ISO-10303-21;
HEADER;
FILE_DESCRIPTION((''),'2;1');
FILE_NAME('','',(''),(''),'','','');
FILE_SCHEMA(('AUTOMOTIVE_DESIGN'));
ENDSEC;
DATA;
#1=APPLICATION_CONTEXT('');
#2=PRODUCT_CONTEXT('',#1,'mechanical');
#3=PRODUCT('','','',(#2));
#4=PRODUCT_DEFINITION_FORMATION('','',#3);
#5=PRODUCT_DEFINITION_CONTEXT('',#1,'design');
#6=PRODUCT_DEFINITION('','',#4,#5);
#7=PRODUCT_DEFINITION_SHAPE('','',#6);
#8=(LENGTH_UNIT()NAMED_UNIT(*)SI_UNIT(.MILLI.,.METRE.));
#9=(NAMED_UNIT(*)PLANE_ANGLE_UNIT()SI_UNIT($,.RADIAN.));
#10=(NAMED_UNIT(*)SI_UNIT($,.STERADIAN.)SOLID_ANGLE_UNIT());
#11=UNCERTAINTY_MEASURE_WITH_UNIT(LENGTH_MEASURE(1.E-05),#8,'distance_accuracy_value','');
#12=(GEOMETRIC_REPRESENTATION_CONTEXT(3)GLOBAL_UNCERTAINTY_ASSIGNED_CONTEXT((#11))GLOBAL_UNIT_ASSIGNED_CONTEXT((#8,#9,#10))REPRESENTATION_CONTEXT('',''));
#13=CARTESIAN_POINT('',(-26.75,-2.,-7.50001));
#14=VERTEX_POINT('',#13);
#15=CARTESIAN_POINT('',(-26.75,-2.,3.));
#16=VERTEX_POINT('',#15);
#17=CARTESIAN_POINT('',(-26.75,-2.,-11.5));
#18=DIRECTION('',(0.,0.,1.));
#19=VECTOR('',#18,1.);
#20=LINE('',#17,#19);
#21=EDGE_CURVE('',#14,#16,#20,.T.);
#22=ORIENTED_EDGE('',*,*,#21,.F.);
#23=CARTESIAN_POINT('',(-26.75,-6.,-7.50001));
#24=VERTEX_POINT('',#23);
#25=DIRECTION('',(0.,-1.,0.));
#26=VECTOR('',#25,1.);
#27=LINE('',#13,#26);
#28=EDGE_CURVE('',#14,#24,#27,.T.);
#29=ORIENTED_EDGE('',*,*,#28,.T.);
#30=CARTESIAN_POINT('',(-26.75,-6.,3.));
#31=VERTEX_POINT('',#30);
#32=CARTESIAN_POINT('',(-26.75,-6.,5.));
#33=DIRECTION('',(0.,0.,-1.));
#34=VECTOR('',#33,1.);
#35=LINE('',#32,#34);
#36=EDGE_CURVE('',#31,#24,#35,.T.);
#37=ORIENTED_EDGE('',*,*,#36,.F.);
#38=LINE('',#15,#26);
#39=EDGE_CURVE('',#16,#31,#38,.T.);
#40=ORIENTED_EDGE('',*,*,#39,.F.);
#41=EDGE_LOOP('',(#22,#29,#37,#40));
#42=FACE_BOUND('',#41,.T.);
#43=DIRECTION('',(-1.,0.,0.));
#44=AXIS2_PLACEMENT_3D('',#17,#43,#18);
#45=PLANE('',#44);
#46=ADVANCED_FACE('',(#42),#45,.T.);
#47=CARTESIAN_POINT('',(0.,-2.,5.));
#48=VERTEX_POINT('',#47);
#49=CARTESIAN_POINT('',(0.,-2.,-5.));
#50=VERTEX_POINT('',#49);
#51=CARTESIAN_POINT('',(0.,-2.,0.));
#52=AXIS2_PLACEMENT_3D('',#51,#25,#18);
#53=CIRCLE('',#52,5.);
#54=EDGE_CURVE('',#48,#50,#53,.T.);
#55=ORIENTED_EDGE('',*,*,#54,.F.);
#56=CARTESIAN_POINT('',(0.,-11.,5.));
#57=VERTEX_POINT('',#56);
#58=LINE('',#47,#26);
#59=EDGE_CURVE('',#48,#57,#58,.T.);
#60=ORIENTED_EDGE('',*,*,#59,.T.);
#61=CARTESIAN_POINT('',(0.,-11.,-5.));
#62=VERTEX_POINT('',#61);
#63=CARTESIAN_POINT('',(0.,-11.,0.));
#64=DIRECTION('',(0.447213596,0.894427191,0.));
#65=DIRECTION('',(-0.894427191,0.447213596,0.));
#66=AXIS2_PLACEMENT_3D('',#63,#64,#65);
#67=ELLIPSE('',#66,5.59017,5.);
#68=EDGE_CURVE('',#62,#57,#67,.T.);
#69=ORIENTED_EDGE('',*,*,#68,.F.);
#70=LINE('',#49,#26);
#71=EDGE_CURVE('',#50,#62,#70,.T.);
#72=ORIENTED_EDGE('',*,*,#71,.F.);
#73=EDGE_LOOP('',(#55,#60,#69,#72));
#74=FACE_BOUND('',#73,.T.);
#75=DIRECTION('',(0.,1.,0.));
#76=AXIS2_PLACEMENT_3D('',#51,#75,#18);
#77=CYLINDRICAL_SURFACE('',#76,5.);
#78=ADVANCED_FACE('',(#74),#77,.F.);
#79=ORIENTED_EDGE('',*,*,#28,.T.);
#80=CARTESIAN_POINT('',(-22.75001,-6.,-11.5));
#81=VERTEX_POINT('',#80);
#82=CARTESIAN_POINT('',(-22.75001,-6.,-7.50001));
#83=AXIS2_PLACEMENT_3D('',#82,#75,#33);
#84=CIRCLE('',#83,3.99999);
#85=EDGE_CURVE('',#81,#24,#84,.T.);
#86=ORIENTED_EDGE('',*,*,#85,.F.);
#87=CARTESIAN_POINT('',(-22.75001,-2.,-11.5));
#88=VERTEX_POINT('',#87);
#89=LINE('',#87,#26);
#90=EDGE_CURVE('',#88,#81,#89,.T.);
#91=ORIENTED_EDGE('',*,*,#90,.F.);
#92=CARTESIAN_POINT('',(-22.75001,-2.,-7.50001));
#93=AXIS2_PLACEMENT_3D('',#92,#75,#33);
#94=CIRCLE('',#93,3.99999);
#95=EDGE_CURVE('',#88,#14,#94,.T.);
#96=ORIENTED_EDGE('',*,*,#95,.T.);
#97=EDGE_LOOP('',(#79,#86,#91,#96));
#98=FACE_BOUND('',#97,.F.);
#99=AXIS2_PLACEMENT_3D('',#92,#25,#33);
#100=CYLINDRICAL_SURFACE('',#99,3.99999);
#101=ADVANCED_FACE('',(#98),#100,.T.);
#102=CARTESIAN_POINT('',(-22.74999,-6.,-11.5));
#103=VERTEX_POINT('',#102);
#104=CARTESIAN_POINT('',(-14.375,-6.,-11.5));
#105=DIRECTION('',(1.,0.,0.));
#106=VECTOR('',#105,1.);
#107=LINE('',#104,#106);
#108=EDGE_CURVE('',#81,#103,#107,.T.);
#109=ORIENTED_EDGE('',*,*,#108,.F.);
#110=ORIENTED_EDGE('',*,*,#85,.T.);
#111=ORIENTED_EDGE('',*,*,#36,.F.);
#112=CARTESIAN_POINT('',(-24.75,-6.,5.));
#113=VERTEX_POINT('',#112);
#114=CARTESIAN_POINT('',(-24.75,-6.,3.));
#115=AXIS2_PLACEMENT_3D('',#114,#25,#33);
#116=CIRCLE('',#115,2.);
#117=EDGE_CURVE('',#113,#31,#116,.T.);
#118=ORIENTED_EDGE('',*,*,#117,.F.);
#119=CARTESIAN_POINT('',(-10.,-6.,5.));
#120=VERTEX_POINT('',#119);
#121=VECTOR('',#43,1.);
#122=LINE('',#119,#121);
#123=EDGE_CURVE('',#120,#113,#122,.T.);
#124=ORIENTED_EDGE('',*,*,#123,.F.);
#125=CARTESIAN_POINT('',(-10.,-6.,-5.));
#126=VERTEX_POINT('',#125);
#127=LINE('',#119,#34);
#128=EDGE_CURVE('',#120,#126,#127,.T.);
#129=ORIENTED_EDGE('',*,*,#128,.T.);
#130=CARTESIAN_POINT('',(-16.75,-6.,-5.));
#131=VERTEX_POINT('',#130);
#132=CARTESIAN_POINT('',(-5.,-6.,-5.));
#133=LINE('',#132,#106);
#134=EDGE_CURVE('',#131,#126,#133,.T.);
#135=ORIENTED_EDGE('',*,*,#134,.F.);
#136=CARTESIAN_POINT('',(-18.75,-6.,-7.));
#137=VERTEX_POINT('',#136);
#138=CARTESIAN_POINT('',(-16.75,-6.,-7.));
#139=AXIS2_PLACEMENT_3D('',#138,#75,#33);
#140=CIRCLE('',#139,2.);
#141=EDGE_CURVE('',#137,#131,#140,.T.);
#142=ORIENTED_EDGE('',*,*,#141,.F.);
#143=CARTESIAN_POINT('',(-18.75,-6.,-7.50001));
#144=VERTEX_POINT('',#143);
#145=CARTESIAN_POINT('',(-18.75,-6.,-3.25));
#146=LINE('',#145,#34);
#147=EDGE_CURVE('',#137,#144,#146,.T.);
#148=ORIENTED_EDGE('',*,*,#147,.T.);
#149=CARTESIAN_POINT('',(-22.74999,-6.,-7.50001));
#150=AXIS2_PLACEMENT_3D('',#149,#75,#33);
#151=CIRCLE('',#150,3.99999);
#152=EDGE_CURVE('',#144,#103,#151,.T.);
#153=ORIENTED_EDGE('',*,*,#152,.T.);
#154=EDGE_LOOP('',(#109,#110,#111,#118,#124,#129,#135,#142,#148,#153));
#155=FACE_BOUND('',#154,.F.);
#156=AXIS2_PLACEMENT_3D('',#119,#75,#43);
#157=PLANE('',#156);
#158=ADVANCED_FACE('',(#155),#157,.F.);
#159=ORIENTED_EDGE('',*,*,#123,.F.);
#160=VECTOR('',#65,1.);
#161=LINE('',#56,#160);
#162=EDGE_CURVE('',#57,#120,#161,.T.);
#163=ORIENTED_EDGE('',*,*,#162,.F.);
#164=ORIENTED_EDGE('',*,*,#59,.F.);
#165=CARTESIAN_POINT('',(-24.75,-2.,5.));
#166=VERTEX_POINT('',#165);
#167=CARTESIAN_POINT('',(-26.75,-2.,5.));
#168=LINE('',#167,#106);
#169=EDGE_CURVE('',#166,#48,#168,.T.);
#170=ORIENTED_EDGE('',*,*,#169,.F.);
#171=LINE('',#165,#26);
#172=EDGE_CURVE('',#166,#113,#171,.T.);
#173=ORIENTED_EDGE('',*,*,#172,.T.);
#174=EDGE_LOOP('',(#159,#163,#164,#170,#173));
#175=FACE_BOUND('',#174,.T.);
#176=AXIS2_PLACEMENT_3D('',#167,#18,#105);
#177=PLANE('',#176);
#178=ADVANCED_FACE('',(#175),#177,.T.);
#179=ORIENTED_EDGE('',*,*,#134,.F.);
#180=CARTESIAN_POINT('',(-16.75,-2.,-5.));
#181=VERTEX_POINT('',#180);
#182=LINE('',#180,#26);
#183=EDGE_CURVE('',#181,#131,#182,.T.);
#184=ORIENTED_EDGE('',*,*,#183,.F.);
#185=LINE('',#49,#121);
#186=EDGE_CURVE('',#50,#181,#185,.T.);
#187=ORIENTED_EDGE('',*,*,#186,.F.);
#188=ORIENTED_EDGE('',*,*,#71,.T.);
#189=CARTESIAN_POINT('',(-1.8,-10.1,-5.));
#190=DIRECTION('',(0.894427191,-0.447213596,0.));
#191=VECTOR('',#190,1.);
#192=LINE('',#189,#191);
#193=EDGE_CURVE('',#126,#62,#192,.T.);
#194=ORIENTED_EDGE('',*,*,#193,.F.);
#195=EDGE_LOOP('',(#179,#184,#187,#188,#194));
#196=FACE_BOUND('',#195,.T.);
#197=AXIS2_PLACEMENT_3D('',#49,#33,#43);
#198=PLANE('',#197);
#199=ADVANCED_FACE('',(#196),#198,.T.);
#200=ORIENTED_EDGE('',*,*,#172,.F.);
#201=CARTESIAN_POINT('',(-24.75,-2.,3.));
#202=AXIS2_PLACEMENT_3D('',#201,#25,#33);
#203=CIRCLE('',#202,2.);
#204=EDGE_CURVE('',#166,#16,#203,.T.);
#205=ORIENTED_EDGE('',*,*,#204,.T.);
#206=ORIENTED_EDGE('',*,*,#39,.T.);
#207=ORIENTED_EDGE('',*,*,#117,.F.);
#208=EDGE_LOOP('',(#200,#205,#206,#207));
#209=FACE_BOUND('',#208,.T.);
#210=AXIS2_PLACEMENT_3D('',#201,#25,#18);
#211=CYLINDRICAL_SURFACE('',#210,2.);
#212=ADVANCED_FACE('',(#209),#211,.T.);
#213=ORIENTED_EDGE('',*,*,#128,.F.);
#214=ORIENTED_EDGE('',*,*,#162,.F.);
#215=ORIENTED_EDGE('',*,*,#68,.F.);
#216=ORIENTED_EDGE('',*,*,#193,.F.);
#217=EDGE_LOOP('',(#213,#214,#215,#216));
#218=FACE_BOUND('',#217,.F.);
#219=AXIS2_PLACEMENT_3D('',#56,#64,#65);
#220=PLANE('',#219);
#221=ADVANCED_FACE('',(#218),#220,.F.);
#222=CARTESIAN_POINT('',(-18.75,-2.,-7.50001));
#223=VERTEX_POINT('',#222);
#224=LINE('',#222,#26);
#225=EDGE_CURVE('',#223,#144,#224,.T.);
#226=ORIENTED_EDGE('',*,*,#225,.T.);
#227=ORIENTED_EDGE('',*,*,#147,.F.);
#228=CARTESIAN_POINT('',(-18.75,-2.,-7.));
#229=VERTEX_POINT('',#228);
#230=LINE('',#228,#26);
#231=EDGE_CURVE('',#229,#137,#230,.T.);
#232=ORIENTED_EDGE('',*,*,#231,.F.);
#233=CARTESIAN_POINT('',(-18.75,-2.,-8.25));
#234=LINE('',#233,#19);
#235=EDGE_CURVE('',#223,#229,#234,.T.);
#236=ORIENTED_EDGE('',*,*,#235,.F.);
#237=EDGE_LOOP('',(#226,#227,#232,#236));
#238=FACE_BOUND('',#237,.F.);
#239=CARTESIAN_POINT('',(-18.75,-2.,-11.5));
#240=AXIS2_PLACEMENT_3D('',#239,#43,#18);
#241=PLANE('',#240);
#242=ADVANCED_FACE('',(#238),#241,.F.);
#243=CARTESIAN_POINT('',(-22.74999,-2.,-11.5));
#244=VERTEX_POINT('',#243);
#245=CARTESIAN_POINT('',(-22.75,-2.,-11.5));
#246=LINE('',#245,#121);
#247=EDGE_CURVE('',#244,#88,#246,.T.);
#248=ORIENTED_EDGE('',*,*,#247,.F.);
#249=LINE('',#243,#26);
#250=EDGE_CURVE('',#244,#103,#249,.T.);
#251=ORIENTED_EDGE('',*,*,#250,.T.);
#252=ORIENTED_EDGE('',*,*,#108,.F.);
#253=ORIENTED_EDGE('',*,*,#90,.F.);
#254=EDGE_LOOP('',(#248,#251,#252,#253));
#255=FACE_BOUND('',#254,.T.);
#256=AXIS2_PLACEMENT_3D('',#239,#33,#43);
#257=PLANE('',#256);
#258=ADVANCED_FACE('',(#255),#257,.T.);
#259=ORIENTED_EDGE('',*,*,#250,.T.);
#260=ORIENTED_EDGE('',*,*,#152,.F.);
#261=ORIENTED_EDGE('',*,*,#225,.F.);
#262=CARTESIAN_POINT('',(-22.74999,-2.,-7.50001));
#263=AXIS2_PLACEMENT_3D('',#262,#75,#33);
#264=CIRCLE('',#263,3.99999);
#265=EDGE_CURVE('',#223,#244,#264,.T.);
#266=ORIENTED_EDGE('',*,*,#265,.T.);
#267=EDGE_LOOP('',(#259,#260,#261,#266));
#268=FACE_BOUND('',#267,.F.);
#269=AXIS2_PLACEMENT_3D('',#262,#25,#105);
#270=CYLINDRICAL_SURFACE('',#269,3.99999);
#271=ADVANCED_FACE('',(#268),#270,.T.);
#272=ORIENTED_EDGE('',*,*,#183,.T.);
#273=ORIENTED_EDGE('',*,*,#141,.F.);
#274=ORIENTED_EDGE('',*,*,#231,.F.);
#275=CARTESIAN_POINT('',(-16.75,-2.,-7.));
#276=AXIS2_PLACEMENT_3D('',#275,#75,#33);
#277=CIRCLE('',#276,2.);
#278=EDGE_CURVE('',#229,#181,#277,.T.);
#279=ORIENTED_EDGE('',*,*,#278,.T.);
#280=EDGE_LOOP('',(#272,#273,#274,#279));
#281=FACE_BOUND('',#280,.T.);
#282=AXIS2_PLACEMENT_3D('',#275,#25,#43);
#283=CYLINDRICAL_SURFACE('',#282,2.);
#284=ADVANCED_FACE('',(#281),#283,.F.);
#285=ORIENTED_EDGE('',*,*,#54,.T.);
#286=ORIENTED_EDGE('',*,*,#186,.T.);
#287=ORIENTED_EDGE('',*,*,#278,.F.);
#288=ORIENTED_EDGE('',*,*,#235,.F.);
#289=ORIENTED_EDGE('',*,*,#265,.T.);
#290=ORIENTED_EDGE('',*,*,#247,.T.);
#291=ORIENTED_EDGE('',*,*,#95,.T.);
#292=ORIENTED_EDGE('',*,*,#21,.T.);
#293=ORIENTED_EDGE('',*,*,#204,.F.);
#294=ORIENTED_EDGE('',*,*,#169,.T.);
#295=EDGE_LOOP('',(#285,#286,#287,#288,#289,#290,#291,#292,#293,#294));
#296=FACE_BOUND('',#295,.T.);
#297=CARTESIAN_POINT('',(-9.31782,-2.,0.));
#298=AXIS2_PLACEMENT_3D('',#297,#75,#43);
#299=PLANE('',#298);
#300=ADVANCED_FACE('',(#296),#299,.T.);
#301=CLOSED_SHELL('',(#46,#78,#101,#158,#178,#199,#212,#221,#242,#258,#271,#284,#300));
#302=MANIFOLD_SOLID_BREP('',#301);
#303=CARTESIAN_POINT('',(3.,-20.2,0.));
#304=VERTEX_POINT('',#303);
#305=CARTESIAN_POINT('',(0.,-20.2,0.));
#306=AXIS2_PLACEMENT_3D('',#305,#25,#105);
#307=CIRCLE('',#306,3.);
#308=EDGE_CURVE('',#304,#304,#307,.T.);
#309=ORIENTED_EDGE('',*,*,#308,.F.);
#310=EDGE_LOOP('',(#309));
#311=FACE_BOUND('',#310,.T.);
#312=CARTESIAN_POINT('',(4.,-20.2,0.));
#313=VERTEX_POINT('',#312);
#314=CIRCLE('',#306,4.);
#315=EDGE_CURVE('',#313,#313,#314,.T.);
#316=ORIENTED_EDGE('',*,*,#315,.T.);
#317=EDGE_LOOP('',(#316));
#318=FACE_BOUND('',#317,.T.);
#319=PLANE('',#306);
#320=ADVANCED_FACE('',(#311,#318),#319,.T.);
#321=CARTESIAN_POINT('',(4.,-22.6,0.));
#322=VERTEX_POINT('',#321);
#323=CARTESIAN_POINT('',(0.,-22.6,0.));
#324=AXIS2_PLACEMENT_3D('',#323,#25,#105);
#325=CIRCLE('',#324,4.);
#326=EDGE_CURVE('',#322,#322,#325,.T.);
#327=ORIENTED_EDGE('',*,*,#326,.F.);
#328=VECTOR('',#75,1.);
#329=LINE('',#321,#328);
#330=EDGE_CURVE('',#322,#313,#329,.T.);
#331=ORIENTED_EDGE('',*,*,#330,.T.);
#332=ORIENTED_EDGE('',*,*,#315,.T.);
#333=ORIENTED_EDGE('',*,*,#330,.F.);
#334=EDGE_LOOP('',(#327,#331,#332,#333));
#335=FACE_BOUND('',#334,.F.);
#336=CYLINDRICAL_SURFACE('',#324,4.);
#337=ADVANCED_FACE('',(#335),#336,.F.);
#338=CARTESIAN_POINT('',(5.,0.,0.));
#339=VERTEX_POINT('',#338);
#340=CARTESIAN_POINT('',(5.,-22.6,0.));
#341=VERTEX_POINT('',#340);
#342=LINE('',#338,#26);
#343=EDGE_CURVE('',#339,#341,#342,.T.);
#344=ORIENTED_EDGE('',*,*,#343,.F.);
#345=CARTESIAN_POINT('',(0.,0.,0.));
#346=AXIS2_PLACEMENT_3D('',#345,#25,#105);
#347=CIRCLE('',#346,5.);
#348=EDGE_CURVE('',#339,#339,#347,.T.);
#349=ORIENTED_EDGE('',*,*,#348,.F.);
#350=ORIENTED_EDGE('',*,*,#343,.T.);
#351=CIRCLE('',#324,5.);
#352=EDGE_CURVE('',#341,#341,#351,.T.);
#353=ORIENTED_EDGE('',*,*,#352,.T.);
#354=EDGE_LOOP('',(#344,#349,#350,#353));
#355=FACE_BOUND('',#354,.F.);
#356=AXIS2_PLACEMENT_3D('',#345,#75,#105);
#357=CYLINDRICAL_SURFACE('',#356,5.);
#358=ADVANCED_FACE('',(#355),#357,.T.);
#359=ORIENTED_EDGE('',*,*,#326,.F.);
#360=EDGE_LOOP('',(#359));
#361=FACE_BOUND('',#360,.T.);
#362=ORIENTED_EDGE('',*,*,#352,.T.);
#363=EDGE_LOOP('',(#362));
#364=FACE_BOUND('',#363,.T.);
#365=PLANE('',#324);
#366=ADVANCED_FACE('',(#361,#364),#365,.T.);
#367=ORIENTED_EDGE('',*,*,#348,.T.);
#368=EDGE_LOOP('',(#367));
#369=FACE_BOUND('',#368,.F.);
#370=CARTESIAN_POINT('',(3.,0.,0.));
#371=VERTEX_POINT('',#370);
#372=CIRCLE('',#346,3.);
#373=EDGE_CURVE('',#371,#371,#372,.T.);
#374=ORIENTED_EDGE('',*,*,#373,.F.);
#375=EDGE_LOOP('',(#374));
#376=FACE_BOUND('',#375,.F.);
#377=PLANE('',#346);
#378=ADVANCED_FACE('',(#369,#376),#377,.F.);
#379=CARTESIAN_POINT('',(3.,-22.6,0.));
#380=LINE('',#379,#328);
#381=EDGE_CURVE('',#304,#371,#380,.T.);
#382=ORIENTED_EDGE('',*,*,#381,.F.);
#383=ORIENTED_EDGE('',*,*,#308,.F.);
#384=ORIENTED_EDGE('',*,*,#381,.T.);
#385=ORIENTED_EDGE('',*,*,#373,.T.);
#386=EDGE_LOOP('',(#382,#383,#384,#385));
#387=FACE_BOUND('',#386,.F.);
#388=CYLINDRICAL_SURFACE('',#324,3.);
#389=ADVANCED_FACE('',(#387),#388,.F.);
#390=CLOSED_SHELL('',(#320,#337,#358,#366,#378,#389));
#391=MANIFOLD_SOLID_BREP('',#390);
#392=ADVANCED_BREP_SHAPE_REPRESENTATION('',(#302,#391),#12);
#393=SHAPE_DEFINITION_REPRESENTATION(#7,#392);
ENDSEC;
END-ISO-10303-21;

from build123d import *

# Parameters (mm, degrees)
F0_R      = 5
F1_DEPTH  = 22.6
F2_R      = 3
F3_DEPTH  = 25
F4_R      = 4
F4_R_2    = 3
F5_DEPTH  = 2.4
F7_W      = 8
F7_H      = 10
F7_H_2    = 6.5
F8_DEPTH  = 9
F10_DEPTH = 25
F11_R     = 2
F12_R     = 2
F13_R     = 3.99999


# Not quite as in the source:
# - a fillet or chamfer is up to 0.001 mm smaller than in the source, because OpenCascade refuses the exact size


with BuildPart() as f1:
    # F0 (on Front) → F1 (new body)
    with BuildSketch(Plane.XZ):
        Circle(F0_R)
    extrude(amount=F1_DEPTH)

    # F2 (on face) → F3 (cut)
    with BuildSketch(Plane.XZ.offset(22.6)):
        Circle(F2_R)
    extrude(amount=-F3_DEPTH, mode=Mode.SUBTRACT)

    # F4 (on face) → F5 (cut)
    with BuildSketch(Plane.XZ.offset(22.6)):
        Circle(F4_R)
        Circle(F4_R_2, mode=Mode.SUBTRACT)
    extrude(amount=-F5_DEPTH, mode=Mode.SUBTRACT)


with BuildPart() as f8:
    # F7 (on offset) → F8 (new body)
    with BuildSketch(Plane(origin=(0, -2, 0), x_dir=(-1, 0, 0), z_dir=(0, 1, 0))):
        with BuildLine():
            ThreePointArc((0, 5), (5, 0), (0, -5))
            Line((0, -5), (18.75, -5))
            Line((18.75, -5), (18.75, 5))
            Line((18.75, 5), (0, 5))
        make_face()
        with Locations((22.75, 0)):
            Rectangle(F7_W, F7_H)
        with Locations((22.75, -8.25)):
            Rectangle(F7_W, F7_H_2)
    extrude(amount=-F8_DEPTH)

    # F9 (on face) → F10 (cut)
    with BuildSketch(Plane.XY.offset(5)):
        Polygon((-26.75, -11), (-5, -11), (-10, -6), (-26.75, -6), align=None)
        Polygon((-10, -6), (-5, -11), (0, -11), align=None)
    extrude(amount=-F10_DEPTH, mode=Mode.SUBTRACT)

    # F11
    f11_edges = [f8.edges().sort_by_distance(p)[0] for p in [
        (-26.75, -4, 5),
    ]]
    fillet(f11_edges, radius=F11_R)

    # F12
    f12_edges = [f8.edges().sort_by_distance(p)[0] for p in [
        (-18.75, -4, -5),
    ]]
    fillet(f12_edges, radius=F12_R)

    # F13 (radius 4 in the source; OpenCascade refuses exactly that, so slightly less here)
    f13_edges = [f8.edges().sort_by_distance(p)[0] for p in [
        (-18.75, -4, -11.5),
        (-26.75, -4, -11.5),
    ]]
    fillet(f13_edges, radius=F13_R)


solid = Compound([f1.part, f8.part])
